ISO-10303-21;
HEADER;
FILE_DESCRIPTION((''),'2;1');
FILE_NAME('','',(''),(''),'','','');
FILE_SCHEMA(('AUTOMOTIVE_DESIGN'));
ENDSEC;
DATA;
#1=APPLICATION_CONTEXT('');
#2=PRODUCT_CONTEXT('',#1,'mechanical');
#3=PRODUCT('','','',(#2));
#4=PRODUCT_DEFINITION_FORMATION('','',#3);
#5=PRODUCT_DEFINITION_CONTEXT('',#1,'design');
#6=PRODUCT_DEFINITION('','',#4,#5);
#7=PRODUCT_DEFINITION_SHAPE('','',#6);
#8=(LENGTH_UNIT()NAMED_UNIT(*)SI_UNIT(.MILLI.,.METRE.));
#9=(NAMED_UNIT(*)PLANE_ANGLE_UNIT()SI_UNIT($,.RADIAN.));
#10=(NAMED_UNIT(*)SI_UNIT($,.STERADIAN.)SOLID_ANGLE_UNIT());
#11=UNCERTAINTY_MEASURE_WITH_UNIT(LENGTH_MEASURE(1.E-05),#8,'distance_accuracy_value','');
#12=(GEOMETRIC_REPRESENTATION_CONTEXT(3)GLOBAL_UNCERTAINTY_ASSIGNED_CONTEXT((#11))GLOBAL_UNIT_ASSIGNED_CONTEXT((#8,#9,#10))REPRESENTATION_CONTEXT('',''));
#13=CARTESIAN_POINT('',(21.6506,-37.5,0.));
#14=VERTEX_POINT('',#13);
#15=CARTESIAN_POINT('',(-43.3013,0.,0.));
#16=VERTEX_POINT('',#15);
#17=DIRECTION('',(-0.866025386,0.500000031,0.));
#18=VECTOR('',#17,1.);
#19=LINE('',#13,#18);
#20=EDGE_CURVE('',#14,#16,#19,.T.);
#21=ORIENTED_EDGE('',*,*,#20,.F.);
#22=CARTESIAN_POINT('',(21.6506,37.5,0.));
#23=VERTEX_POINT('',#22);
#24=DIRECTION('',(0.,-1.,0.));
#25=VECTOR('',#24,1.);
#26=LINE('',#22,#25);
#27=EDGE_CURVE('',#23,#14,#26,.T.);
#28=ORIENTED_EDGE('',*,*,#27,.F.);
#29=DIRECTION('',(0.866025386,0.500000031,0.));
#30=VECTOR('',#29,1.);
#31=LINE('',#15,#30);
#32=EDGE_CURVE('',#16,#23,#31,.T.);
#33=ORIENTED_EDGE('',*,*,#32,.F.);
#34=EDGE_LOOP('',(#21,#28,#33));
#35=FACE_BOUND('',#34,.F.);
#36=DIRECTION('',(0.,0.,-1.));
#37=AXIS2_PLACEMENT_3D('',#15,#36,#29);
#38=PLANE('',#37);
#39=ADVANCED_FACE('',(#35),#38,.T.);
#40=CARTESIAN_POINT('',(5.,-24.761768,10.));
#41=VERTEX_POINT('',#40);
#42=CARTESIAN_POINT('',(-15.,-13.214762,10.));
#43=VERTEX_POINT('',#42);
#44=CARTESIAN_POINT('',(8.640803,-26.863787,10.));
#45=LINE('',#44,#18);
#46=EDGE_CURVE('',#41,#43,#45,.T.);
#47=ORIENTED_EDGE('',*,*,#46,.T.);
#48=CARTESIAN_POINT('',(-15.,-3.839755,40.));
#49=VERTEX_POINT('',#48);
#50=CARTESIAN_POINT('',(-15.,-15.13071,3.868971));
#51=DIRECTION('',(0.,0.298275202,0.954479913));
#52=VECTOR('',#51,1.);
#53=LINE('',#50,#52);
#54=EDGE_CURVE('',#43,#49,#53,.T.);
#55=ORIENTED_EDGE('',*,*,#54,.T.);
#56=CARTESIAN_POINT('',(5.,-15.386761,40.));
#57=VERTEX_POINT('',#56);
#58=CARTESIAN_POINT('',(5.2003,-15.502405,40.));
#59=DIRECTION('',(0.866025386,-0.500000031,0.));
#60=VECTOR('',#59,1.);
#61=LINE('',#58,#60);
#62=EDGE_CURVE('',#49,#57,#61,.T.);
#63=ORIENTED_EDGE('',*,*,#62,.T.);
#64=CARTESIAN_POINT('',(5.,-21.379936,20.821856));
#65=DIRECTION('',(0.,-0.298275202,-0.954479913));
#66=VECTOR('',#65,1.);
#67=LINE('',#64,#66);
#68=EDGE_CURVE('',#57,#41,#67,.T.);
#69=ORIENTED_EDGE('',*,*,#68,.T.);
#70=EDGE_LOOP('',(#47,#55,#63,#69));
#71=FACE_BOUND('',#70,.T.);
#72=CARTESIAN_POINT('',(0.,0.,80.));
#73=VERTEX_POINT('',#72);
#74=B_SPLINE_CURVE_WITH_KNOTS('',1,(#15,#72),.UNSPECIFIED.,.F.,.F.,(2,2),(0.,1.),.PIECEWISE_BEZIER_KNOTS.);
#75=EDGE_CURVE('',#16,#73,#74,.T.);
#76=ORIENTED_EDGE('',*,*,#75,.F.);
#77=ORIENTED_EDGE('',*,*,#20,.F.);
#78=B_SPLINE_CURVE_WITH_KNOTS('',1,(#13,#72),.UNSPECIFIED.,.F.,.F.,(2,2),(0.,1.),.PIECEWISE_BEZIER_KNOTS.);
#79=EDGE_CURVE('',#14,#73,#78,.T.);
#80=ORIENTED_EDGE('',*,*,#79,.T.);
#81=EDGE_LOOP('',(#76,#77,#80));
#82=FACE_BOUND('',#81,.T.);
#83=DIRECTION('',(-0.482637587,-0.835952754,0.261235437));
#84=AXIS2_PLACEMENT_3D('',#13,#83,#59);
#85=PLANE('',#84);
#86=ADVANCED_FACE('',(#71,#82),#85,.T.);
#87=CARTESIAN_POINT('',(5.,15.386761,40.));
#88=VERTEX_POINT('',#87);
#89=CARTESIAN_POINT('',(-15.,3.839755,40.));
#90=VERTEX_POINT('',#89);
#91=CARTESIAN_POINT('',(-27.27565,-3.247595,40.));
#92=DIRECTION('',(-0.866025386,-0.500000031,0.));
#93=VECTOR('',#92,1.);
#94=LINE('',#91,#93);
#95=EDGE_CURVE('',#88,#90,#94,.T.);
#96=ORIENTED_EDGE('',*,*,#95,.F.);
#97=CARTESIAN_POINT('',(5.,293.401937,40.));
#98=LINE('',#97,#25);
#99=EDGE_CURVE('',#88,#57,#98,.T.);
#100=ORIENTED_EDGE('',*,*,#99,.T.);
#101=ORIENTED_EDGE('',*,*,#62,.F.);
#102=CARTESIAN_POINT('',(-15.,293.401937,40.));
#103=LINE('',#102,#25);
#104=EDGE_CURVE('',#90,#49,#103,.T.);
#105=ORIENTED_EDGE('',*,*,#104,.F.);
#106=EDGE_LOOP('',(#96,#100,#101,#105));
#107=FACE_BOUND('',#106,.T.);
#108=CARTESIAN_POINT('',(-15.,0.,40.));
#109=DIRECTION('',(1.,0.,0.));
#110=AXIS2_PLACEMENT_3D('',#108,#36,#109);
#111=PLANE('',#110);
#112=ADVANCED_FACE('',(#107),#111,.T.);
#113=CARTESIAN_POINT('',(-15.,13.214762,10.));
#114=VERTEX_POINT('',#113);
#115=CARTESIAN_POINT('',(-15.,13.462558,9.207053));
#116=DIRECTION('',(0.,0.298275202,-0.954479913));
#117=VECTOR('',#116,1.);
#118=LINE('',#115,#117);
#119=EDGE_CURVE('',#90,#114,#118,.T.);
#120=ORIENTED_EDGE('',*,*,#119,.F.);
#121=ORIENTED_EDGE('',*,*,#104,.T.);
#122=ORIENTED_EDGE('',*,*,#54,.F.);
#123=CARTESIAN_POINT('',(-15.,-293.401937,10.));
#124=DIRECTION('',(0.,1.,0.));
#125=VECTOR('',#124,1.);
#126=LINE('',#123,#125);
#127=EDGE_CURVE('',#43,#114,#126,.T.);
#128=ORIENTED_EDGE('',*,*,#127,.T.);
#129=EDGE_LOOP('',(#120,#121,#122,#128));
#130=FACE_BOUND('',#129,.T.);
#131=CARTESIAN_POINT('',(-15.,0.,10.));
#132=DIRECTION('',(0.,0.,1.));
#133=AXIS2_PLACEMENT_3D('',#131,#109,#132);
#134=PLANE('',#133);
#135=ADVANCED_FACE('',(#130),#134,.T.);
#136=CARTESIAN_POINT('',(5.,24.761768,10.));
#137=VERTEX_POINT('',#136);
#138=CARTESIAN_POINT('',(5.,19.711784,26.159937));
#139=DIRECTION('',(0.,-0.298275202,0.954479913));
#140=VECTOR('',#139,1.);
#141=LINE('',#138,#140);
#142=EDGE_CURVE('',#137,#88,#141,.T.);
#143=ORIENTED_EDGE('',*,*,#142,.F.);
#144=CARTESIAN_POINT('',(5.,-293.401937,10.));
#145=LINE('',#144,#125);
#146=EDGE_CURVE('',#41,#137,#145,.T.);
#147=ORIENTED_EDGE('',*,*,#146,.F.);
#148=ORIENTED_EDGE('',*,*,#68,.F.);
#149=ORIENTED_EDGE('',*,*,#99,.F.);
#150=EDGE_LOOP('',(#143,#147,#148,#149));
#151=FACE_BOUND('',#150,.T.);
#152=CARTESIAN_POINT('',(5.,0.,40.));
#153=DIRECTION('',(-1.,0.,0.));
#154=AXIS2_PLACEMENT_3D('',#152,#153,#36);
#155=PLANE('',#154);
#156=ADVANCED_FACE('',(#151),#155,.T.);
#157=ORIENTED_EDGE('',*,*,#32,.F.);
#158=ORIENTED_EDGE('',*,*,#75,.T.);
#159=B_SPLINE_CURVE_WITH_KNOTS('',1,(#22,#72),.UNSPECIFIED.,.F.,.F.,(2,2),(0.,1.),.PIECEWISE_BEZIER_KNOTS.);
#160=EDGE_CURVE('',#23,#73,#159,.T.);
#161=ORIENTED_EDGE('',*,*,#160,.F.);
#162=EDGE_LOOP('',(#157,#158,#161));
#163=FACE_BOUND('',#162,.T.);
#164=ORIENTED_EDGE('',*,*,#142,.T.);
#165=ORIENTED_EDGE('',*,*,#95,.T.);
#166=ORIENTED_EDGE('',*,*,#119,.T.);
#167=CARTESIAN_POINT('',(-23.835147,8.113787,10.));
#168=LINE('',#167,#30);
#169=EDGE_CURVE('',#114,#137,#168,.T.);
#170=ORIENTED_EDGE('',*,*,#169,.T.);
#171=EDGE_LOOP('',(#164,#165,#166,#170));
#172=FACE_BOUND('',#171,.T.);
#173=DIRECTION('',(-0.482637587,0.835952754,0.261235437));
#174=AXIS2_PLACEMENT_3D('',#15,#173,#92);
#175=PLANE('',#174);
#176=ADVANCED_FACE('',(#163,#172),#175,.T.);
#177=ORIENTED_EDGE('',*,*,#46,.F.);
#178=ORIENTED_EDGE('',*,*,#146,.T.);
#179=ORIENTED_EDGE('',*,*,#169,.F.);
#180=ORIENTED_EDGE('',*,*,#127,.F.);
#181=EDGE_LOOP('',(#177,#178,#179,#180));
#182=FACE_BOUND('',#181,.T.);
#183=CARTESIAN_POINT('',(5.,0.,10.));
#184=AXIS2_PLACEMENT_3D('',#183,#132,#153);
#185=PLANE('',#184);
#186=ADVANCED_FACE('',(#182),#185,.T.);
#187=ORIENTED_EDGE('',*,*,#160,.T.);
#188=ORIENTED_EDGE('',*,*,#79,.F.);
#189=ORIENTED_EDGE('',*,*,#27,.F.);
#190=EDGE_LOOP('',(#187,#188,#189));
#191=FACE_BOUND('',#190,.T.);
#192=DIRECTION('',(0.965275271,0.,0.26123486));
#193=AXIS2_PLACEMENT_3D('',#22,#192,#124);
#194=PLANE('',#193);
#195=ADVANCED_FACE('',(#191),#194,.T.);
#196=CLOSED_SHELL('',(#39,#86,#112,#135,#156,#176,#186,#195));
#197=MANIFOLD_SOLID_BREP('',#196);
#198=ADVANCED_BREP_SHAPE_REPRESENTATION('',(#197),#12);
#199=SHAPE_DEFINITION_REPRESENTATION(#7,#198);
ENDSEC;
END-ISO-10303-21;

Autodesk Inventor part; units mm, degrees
ref_plane "YZ Plane" through (0, 0, 0) normal (1, 0, 0) x (0, 1, 0)
ref_plane "XZ Plane" through (0, 0, 0) normal (0, 1, 0) x (-1, 0, 0)
sketch "Эскиз1" plane through (0, 0, 0) normal (0, 0, 1) x (1, 0, 0)
  line L0 (-43.3013, 0) -> (21.6506, 37.5)
  line L1 (21.6506, 37.5) -> (21.6506, -37.5)
  line L2 (21.6506, -37.5) -> (-43.3013, 0)
  point P0 (0, 0)
  point P1 (0, 0)
  dimension "d2" = 75
ref_plane "РабПлоскость1" through (0, 0, 80) normal (0, 0, 1) x (1, 0, 0)
sketch "Эскиз2" plane through (0, 0, 80) normal (0, 0, 1) x (1, 0, 0)
  point P0 (0, 0)
  point P1 (0, 0)
loft "Лофт1" add profiles "Эскиз1" section 2 point at (0, 0, 80)
sketch "Эскиз3" plane through (0, 0, 0) normal (0, 1, 0) x (-1, 0, 0)
  point P0 (0, 0)
sketch "Эскиз4" plane through (0, 0, 0) normal (0, 1, 0) x (-1, 0, 0)
  line L0 (-5, 10) -> (15, 10)
  line L1 (15, 10) -> (15, 40)
  line L2 (15, 40) -> (-5, 40)
  line L3 (-5, 40) -> (-5, 10)
  line L4 (-5, 10) -> (15, 40) construction
  line L5 (15, 10) -> (-5, 40) construction
  point P0 (0, 0)
  point P1 (0, 0)
  point P2 (5, 25)
  dimension "d8" = 20
  dimension "d9" = 30
  dimension "d10" = 15
  dimension "d12" = 10
extrude "Выдавливание1" cut sketch "Эскиз4" along normal through all both and the other way through all
sketch "Эскиз5" plane through (21.6506, -37.5, 0) normal (-0.4826376, -0.8359528, 0.2612353) x (0.8428609, -0.3622752, 0.3979224)
  point P0 (-31.8338, 20.6119)
properties part number "ДЗ2 Курганова"
